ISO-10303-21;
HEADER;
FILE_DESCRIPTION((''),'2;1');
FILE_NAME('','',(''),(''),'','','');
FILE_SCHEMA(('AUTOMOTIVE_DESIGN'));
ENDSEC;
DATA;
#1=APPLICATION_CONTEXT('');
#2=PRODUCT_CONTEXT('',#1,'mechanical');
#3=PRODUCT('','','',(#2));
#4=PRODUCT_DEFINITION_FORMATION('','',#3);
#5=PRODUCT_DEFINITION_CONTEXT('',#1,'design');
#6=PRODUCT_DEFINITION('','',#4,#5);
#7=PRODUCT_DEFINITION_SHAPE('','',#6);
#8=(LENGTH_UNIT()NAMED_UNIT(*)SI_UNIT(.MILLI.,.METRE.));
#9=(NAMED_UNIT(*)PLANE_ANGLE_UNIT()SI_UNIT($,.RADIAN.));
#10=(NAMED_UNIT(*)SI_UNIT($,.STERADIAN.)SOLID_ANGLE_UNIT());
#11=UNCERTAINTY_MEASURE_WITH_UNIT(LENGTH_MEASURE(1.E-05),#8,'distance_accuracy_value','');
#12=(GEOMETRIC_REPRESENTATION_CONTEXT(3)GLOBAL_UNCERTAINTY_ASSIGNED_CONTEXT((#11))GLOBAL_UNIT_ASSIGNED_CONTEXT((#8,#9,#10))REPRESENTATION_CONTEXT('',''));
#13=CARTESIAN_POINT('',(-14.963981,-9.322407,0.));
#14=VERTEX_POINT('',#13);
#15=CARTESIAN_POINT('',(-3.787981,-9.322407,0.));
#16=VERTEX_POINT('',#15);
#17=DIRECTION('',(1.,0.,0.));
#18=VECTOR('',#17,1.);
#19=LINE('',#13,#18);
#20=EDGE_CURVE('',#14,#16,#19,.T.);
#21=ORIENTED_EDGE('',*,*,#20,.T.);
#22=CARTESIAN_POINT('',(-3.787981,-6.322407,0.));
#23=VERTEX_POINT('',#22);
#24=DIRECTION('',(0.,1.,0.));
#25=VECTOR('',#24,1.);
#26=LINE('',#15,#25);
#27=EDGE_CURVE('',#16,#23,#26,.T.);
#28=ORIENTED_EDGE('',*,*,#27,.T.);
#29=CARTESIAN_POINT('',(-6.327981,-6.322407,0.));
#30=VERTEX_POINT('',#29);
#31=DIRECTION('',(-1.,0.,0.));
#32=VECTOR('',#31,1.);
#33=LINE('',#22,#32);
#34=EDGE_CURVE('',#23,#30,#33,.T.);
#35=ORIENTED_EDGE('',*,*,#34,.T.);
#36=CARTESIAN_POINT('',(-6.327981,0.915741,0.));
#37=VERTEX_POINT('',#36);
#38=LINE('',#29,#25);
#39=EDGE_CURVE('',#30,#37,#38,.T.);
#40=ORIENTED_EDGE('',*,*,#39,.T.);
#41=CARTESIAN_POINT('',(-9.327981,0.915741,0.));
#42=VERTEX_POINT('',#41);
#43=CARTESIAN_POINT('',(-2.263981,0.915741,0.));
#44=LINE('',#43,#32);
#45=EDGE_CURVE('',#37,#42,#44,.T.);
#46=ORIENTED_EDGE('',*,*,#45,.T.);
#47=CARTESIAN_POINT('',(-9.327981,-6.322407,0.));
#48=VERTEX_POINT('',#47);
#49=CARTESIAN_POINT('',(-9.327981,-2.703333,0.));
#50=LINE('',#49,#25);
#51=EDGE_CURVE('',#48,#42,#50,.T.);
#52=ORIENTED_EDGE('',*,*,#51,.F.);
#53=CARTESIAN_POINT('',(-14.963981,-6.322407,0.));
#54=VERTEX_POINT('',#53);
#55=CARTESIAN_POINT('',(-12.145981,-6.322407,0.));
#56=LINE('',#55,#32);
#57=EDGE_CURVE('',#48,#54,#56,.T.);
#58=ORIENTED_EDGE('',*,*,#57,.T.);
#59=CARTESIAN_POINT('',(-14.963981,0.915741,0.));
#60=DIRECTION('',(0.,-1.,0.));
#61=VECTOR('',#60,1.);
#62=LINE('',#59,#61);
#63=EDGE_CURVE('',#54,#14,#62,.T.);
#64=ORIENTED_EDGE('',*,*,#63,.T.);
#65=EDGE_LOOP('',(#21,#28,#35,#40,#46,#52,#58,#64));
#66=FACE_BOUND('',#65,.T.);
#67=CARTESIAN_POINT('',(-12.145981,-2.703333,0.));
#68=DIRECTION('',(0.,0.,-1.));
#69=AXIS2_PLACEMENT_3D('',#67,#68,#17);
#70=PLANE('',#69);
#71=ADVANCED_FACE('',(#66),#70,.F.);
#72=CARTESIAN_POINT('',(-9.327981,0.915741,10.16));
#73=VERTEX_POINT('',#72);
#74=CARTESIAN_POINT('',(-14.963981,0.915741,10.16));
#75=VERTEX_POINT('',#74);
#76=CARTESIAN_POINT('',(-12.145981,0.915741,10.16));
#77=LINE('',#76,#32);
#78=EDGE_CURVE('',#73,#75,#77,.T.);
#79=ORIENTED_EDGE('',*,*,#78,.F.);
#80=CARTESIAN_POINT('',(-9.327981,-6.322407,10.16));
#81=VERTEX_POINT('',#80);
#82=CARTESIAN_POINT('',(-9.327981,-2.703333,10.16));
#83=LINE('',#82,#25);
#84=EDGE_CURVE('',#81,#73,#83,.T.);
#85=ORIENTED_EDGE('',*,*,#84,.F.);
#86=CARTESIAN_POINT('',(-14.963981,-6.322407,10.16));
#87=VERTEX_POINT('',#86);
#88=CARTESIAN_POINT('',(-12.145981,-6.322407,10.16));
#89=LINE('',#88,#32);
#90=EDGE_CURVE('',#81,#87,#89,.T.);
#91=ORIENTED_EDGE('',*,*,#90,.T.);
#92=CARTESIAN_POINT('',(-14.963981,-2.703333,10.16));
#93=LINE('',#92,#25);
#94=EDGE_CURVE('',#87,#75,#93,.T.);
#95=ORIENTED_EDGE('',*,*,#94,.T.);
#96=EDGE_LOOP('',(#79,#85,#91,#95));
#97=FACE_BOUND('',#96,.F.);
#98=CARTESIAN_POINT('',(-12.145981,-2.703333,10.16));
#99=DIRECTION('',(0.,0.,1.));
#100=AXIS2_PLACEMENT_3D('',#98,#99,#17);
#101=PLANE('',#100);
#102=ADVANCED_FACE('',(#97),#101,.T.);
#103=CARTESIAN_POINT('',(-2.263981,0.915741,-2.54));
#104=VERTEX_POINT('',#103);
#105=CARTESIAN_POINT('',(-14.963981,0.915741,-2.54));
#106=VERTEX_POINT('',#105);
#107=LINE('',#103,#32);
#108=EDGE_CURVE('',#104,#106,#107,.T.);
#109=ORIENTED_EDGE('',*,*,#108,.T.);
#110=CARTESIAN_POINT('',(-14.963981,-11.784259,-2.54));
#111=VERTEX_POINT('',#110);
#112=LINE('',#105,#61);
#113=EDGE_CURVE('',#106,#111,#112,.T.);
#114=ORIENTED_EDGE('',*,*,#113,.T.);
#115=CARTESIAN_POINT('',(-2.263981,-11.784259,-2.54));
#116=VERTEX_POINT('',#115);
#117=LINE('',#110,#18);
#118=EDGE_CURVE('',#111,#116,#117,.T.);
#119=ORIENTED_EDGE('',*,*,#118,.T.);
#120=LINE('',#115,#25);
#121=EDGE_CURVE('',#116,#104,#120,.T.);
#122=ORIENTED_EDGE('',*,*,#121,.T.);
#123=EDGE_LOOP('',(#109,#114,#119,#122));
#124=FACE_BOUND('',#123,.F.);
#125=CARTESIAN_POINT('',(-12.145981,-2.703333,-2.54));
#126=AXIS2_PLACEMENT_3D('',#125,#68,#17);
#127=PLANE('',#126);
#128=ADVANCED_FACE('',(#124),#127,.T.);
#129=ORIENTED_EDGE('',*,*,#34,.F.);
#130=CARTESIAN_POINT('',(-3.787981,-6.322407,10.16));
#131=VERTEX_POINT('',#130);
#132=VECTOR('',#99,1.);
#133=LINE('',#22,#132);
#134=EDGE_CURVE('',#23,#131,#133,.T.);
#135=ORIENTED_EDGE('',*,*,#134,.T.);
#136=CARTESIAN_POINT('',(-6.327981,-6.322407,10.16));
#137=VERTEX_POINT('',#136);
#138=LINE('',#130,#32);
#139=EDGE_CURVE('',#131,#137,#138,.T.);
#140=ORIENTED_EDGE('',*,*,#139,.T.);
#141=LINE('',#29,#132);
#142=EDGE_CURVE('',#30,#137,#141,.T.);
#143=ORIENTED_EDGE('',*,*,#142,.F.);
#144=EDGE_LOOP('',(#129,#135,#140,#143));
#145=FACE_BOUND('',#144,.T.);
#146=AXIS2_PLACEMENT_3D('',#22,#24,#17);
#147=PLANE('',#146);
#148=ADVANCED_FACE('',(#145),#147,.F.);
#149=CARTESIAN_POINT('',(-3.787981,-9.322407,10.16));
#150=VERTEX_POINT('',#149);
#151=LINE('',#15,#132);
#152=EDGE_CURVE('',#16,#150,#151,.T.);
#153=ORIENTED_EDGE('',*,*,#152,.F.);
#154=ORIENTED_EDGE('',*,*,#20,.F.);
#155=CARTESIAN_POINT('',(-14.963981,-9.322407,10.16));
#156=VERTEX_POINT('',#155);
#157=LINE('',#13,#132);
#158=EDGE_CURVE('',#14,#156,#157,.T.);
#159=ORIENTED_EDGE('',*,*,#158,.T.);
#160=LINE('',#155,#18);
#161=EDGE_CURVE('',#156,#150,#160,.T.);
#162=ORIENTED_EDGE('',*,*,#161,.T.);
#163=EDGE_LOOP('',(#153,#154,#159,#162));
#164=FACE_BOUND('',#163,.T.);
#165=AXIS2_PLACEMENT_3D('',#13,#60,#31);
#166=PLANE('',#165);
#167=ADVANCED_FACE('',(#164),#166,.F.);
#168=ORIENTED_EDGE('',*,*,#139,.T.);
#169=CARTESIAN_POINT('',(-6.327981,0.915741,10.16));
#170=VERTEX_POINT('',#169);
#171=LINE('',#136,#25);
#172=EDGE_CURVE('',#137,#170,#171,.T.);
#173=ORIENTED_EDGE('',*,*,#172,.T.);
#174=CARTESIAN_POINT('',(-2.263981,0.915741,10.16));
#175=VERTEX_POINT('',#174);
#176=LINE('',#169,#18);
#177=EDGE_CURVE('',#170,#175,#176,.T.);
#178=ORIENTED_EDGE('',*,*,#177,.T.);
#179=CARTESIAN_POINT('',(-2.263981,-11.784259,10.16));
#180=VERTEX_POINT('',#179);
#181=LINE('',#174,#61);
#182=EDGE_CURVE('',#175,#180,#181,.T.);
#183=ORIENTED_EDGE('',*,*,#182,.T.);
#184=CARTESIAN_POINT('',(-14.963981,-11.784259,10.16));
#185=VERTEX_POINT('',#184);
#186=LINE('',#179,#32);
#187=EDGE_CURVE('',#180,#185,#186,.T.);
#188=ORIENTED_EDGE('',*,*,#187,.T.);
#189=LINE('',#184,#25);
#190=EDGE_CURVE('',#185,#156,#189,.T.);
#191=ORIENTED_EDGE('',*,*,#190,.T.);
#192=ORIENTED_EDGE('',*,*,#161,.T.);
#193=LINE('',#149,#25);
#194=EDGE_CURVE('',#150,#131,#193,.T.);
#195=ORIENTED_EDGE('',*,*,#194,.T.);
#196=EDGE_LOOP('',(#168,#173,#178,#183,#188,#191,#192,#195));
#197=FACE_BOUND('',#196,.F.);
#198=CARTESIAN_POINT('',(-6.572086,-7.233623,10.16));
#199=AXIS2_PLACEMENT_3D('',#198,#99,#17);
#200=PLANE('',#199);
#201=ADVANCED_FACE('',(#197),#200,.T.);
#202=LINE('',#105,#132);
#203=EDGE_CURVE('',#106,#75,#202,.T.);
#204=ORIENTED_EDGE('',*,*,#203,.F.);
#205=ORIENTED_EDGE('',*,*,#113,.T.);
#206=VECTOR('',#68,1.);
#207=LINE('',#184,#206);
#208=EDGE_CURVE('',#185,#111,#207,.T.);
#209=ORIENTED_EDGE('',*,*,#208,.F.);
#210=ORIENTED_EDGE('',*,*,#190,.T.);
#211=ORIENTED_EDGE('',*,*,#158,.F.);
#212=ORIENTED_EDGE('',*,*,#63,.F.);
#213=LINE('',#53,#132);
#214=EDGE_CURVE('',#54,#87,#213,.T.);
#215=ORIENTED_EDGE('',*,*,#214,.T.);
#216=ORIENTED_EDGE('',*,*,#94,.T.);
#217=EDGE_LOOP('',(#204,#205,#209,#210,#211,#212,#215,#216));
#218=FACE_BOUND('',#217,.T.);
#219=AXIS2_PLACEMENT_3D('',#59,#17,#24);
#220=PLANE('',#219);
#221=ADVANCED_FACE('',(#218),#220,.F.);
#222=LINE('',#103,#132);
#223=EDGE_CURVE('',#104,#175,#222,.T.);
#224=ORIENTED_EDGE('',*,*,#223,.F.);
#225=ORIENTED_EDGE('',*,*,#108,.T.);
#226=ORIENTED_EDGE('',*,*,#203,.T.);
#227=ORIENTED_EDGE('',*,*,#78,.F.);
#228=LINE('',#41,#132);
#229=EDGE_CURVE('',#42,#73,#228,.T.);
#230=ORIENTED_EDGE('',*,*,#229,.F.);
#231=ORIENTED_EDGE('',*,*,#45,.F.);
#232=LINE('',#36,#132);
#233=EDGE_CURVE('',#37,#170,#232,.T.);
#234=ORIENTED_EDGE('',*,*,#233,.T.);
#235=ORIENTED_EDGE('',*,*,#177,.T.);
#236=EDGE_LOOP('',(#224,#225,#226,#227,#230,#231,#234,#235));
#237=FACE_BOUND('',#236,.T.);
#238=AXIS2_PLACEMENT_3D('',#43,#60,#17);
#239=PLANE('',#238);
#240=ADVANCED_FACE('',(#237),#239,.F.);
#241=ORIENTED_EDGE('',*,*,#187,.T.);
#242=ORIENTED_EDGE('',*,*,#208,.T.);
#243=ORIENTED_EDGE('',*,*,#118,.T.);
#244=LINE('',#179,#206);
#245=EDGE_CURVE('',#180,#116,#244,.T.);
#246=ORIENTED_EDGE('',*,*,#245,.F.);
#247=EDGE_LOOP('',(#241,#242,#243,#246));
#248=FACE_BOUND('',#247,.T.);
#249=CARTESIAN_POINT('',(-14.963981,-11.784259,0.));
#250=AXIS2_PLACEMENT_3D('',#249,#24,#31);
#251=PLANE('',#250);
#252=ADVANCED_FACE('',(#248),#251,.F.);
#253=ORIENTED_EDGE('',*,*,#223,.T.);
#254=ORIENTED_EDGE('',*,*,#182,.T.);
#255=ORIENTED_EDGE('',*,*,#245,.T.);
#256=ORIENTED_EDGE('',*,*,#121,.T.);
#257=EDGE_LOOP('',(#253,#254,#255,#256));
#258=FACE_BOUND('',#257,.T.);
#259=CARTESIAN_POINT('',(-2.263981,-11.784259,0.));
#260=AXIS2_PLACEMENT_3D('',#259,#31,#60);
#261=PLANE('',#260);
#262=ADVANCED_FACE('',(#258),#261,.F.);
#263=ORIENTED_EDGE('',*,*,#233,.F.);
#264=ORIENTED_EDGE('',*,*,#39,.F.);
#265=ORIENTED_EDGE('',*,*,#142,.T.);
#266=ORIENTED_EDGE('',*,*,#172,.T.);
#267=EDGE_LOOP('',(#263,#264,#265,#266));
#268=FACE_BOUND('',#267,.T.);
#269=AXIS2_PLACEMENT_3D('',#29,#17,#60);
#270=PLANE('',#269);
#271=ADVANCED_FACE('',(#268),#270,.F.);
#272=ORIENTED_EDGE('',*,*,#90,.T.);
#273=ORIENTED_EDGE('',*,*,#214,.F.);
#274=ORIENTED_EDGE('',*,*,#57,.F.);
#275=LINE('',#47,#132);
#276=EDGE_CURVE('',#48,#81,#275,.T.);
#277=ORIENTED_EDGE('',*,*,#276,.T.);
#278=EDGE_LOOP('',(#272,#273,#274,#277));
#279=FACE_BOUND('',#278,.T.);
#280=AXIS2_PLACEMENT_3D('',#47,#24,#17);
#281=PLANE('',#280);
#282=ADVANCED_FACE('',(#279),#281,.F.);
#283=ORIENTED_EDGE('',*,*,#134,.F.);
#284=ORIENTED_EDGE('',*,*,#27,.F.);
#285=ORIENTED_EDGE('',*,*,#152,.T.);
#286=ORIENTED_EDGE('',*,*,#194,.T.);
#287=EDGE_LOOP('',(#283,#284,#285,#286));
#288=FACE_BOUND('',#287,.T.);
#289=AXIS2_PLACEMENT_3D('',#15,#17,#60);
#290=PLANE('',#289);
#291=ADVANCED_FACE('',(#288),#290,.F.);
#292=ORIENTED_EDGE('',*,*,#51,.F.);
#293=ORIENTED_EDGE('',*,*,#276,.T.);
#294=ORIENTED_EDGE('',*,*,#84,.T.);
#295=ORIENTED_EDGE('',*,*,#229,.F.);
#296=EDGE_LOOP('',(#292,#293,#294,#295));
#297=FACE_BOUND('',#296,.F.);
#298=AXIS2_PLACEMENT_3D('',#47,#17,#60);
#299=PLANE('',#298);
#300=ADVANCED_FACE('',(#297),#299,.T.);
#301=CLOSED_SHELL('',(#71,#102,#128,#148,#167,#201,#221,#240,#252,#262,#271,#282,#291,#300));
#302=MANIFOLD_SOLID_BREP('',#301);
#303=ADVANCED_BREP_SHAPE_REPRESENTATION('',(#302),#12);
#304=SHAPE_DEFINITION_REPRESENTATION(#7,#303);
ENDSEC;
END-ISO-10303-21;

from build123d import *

# Parameters (mm, degrees)
F0_W     = 5.636
F0_H     = 7.2381474632
F1_DEPTH = 10.16
F2_W     = 5.636
F2_H     = 7.2381474632
F3_DEPTH = 2.54


# Not quite as in the source:
# - a feature of the source that left no trace in its solid (it failed there, or was rolled back) is left out


with BuildPart() as f1:
    # F0 (on Top) → F1 (new body)
    with BuildSketch(Plane.XY):
        with Locations((-5.0819813066, -2.7033329925)):
            Rectangle(F0_W, F0_H)
    extrude(amount=F1_DEPTH)



with BuildPart() as f1b:
    # F0 (on Top) → F1, piece 2 (new body)
    with BuildSketch(Plane.XY):
        Polygon((-10.8999813066, 0.9157407391), (-14.9639813066, 0.9157407391), (-14.9639813066, -11.7842592609), (-2.2639813066, -11.7842592609), (-2.2639813066, -9.3224067241), (-7.8999813066, -9.3224067241), (-10.8999813066, -9.3224067241), (-13.4399813066, -9.3224067241), (-13.4399813066, -6.3224067241), (-10.8999813066, -6.3224067241), align=None)
    extrude(amount=F1_DEPTH)


with BuildPart() as f1_1:
    add(f1.part)

    add(f1b.part)  # F3 merges F1b
    # F2 (on face) → F3 (join)
    with BuildSketch(Plane(origin=(0, 0, 0), x_dir=(1, 0, 0), z_dir=(0, 0, -1))):
        with Locations((-5.0819813066, 2.7033329925)):
            Rectangle(F2_W, F2_H)
        Polygon((-2.2639813066, 9.3224067241), (-13.4399813066, 9.3224067241), (-13.4399813066, 6.3224067241), (-10.8999813066, 6.3224067241), (-10.8999813066, -0.9157407391), (-7.8999813066, -0.9157407391), (-7.8999813066, 6.3224067241), (-2.2639813066, 6.3224067241), align=None)
        Polygon((-13.4399813066, 6.3224067241), (-13.4399813066, 9.3224067241), (-2.2639813066, 9.3224067241), (-2.2639813066, 11.7842592609), (-14.9639813066, 11.7842592609), (-14.9639813066, -0.9157407391), (-10.8999813066, -0.9157407391), (-10.8999813066, 6.3224067241), align=None)
    extrude(amount=F3_DEPTH)


with BuildPart() as f5_1:
    # F5: instance of F1
    add(f1_1.part.mirror(Plane(origin=(-8.6139813066, -4.877797716, 3.5140776699), x_dir=(0, 1, 0), z_dir=(1, 0, 0))))


solid = f5_1.part
